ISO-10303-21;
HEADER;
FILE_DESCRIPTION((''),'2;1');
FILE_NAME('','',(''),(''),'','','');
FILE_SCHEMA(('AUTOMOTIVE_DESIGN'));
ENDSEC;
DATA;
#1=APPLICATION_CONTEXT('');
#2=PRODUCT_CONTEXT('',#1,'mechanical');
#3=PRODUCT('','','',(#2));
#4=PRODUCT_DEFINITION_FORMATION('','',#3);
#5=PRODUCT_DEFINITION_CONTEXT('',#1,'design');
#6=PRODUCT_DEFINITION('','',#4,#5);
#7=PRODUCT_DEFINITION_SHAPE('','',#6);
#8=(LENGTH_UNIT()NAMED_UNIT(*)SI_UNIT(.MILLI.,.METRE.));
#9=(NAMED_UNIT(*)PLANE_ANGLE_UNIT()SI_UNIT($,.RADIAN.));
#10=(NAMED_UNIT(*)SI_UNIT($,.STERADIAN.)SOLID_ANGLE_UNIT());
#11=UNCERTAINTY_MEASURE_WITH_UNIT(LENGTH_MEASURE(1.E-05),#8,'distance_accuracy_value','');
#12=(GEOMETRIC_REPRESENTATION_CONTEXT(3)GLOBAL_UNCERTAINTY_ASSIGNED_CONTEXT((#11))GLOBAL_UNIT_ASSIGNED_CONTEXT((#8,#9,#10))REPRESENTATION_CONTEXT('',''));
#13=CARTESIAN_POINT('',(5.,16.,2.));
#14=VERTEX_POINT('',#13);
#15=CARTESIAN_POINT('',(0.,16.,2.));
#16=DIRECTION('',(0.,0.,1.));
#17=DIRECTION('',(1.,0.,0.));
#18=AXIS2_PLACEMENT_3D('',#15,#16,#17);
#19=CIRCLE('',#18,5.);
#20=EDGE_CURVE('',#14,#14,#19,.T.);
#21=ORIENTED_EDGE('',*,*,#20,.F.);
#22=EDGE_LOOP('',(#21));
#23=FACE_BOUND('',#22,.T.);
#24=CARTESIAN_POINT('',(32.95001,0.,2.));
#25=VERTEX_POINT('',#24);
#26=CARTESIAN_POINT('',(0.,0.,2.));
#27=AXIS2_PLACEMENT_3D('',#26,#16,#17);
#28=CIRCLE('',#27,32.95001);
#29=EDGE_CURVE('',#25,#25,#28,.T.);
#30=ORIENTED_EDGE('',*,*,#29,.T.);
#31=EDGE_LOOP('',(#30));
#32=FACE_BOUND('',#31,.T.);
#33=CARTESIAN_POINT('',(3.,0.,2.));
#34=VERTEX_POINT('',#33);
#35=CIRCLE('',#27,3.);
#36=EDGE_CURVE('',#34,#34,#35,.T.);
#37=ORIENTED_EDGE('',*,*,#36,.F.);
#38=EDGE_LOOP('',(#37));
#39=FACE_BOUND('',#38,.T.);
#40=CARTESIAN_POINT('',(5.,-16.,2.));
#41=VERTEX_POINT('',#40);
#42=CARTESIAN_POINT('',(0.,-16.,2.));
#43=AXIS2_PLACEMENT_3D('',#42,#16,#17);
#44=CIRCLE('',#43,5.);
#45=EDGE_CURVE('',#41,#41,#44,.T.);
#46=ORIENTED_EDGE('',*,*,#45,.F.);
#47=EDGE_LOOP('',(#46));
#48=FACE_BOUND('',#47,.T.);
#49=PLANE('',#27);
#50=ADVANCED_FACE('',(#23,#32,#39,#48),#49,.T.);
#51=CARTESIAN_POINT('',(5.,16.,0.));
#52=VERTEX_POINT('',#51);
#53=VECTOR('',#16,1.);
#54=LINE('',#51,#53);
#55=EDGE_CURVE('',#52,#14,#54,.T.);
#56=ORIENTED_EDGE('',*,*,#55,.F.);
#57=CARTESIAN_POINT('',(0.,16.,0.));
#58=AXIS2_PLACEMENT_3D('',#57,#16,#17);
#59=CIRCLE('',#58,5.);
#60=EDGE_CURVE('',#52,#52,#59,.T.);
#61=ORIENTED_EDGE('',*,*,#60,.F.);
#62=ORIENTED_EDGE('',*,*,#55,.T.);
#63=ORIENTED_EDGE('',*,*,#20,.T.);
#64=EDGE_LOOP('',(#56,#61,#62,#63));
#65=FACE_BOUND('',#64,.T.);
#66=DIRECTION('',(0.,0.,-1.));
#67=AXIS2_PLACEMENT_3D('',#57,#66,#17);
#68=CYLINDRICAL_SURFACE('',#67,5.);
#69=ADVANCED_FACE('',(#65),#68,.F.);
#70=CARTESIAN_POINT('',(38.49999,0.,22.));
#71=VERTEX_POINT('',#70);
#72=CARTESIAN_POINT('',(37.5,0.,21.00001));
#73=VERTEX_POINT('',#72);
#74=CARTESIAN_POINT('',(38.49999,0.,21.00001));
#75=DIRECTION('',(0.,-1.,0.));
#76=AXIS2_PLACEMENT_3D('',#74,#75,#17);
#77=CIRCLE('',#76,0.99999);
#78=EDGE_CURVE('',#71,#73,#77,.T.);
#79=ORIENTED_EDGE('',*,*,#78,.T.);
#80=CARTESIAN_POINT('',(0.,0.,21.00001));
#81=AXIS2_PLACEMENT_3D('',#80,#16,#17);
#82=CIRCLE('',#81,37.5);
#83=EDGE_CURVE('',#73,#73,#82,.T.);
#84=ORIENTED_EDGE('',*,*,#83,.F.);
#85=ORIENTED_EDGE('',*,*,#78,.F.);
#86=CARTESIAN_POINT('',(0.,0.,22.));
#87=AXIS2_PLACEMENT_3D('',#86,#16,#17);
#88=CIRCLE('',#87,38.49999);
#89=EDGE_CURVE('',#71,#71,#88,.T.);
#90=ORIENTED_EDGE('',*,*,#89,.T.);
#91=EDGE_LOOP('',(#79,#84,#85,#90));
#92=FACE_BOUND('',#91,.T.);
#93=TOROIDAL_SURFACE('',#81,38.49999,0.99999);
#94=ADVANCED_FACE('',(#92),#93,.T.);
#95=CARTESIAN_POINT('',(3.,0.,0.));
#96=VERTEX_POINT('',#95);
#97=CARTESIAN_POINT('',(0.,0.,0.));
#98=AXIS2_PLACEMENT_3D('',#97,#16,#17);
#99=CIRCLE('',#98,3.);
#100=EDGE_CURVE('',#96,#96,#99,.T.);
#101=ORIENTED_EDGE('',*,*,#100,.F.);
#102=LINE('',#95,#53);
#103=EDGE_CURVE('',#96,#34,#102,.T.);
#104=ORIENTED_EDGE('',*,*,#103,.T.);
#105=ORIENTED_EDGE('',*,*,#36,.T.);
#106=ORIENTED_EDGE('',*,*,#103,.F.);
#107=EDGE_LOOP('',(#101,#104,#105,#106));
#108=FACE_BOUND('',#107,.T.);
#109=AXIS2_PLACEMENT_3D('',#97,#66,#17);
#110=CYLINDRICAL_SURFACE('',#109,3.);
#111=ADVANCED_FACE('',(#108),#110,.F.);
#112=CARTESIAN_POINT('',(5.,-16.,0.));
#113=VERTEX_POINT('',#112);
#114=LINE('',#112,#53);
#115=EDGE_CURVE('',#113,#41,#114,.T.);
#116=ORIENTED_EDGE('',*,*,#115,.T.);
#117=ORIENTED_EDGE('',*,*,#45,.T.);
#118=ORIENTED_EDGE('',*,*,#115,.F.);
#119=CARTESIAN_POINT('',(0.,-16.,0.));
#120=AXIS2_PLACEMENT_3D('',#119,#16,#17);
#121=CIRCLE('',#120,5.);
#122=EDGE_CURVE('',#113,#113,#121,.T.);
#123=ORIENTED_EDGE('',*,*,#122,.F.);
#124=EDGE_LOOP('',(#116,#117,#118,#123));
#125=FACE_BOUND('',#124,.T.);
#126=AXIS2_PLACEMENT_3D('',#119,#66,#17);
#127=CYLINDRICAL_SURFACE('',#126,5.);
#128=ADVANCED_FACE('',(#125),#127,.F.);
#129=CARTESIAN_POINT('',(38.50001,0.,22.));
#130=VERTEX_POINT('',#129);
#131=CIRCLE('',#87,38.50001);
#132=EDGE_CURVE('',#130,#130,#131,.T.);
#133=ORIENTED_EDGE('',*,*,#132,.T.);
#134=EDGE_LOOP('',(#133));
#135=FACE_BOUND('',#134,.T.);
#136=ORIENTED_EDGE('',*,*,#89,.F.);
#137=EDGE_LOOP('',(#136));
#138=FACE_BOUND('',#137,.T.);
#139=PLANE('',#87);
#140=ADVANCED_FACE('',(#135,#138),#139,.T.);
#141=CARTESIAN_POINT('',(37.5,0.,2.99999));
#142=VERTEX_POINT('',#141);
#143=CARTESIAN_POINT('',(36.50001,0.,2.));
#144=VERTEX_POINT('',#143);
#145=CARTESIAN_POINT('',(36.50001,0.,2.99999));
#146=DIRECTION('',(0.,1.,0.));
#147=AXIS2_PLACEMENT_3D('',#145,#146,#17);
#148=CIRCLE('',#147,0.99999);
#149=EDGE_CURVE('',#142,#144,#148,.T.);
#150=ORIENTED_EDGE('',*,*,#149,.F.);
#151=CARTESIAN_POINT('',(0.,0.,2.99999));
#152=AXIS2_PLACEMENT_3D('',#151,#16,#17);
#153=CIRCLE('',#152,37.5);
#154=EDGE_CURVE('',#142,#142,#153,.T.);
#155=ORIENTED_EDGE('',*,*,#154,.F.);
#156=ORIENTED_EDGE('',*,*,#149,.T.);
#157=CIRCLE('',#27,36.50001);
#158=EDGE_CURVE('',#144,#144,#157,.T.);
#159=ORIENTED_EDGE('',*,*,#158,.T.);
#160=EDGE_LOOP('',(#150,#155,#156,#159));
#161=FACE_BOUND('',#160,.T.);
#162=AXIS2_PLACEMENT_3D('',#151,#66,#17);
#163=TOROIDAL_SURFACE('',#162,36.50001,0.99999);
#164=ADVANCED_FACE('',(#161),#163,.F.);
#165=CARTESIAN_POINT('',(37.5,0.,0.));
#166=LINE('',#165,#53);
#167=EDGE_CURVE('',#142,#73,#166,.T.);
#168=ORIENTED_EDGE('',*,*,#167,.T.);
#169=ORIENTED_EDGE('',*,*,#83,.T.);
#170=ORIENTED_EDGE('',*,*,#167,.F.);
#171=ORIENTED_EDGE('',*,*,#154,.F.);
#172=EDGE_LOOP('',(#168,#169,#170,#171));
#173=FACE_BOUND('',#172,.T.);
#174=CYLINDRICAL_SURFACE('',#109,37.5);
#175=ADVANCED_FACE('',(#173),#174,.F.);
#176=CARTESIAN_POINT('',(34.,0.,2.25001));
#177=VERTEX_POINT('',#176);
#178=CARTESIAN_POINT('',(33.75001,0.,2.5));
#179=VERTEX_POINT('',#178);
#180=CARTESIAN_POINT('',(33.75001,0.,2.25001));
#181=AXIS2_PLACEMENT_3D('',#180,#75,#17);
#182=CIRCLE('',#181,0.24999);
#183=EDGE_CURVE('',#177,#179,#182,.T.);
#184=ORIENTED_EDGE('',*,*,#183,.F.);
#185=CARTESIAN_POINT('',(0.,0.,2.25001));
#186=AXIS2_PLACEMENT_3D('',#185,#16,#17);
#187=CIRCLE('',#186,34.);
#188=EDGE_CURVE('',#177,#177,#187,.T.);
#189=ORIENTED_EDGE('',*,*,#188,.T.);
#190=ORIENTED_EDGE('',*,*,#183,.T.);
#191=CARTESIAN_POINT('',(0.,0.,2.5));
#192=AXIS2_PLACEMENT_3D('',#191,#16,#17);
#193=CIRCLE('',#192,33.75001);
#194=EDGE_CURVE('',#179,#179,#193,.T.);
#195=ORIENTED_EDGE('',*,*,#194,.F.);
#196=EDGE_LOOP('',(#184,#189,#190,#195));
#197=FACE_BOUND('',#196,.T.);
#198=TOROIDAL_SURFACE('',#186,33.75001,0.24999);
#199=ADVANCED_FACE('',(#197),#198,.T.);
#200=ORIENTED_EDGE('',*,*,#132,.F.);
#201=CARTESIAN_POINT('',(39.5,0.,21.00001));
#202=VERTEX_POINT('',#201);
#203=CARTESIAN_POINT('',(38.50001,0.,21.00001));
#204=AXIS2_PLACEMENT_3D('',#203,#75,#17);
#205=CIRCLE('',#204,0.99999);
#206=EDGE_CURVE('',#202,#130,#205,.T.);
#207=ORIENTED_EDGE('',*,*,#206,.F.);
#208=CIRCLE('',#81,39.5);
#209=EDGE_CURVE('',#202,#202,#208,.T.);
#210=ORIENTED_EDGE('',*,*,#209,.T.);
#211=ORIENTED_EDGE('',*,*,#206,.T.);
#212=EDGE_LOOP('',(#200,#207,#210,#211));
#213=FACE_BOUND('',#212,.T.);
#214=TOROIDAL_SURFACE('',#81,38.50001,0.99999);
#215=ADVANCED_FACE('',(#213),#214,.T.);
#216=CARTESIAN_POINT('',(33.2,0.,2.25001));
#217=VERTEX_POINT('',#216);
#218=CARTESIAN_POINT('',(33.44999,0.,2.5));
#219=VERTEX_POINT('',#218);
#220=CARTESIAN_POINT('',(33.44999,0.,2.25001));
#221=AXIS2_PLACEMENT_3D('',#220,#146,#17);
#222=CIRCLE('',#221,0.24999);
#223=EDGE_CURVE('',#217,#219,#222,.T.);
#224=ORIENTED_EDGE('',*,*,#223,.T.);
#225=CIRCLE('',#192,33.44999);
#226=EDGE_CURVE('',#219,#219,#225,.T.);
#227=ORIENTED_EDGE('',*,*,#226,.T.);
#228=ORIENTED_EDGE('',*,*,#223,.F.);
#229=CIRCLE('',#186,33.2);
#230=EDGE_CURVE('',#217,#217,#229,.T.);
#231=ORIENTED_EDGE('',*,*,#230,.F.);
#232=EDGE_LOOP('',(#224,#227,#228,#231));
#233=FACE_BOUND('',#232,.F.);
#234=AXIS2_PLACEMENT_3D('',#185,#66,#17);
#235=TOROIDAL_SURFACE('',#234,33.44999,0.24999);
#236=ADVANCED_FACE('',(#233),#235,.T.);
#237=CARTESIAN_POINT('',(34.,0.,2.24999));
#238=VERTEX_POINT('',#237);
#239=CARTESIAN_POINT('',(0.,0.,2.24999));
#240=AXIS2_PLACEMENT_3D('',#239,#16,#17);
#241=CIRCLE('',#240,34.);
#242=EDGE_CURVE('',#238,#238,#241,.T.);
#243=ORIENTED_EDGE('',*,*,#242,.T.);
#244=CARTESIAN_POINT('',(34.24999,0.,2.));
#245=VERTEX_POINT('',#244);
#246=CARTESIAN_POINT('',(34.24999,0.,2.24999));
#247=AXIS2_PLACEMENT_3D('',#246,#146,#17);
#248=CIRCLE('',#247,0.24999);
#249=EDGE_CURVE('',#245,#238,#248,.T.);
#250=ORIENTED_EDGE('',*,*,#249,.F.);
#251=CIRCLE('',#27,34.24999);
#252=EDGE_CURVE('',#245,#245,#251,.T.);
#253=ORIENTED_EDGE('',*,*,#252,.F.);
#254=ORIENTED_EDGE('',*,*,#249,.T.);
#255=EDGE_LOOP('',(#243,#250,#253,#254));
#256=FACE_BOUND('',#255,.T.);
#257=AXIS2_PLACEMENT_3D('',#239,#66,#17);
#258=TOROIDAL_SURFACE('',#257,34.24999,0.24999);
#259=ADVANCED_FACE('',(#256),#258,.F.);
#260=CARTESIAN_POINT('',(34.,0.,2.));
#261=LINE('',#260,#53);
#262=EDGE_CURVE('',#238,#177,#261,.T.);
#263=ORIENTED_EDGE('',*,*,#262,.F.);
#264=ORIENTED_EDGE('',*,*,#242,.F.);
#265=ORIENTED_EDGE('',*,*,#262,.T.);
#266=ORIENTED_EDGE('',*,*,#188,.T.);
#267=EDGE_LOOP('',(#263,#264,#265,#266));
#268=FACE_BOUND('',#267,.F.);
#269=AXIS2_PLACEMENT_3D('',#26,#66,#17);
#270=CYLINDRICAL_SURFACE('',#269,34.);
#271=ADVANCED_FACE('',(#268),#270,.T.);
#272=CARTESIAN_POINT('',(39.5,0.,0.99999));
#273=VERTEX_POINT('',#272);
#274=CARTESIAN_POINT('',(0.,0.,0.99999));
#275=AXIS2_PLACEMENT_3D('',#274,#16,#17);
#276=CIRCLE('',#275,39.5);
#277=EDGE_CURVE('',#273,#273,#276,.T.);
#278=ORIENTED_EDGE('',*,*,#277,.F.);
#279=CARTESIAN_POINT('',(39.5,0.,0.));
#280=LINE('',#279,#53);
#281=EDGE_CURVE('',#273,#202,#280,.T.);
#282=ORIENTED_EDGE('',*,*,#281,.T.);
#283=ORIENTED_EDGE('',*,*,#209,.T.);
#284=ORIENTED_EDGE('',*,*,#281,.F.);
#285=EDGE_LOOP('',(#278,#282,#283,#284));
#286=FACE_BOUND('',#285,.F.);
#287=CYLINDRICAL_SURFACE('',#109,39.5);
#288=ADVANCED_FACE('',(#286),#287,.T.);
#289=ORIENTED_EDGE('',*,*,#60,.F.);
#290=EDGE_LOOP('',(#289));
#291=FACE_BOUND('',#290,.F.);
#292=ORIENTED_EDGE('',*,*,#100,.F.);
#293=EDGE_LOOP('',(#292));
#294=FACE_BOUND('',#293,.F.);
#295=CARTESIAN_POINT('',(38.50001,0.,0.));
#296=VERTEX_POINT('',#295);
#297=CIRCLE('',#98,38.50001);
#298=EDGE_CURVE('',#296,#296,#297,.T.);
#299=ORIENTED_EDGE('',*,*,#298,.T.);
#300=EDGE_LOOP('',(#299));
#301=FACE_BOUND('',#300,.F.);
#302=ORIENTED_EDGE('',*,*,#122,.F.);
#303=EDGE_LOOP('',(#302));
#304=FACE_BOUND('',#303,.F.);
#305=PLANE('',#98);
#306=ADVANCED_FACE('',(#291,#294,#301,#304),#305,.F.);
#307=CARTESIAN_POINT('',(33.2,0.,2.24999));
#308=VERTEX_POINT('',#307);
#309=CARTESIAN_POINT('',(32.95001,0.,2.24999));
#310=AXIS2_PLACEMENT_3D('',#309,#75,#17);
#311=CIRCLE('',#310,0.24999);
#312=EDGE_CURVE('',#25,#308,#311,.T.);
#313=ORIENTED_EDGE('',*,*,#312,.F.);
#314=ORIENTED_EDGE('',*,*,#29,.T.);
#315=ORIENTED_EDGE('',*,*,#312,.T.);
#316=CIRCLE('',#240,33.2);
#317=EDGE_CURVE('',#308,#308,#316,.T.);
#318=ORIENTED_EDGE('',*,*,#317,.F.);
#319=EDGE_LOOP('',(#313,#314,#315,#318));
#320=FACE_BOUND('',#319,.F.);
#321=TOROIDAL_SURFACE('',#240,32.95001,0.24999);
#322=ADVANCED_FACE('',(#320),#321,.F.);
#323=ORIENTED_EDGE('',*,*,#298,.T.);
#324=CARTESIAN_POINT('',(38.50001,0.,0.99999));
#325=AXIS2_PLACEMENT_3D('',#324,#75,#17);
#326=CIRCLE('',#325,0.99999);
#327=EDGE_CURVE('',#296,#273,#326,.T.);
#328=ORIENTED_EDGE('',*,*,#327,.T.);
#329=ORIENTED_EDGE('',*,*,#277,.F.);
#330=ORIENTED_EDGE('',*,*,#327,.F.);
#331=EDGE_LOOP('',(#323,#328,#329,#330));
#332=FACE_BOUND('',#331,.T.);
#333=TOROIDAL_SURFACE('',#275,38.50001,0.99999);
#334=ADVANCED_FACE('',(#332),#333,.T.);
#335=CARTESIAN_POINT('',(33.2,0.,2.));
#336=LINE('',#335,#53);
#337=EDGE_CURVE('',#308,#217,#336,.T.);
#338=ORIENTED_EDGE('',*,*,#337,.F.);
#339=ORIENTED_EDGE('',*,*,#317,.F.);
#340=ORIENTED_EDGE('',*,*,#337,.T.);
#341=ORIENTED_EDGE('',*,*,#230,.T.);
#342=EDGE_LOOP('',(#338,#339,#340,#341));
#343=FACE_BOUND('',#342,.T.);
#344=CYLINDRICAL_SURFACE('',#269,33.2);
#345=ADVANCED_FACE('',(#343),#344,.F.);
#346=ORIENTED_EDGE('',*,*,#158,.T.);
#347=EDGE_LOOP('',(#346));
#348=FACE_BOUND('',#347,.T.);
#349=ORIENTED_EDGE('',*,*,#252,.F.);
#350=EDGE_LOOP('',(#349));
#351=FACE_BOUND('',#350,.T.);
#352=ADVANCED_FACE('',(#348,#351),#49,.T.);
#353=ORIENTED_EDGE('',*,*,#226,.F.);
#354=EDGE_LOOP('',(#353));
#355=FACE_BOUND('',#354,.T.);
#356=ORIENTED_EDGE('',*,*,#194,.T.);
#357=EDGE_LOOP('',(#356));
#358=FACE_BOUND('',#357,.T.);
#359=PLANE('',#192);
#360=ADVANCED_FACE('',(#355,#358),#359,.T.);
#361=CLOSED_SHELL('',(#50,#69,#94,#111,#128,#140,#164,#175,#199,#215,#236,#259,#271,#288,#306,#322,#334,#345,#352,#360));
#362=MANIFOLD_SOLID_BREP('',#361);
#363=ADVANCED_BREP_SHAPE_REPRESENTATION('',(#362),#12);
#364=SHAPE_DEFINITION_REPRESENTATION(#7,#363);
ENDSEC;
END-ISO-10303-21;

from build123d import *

# Parameters (mm, degrees)
F0_R     = 37.5
F0_R_2   = 5
F0_R_3   = 3
F1_DEPTH = 2
F0_R_4   = 39.5
F2_DEPTH = 22
F3_R     = 34
F3_R_2   = 33.2
F4_DEPTH = 0.5
F5_R     = 0.24999
F6_R     = 0.99999


# Not quite as in the source:
# - a fillet or chamfer is up to 0.001 mm smaller than in the source, because OpenCascade refuses the exact size


with BuildPart() as f1:
    # F0 (on Top) → F1 (new body)
    with BuildSketch(Plane.XY):
        Circle(F0_R)
        with Locations((0, -16)):
            Circle(F0_R_2, mode=Mode.SUBTRACT)
        Circle(F0_R_3, mode=Mode.SUBTRACT)
        with Locations((0, 16)):
            Circle(F0_R_2, mode=Mode.SUBTRACT)
    extrude(amount=F1_DEPTH)

    # F0 (on Top) → F2 (join)
    with BuildSketch(Plane.XY):
        Circle(F0_R_4)
        Circle(F0_R, mode=Mode.SUBTRACT)
    extrude(amount=F2_DEPTH)

    # F3 (on face) → F4 (join)
    with BuildSketch(Plane.XY.offset(2)):
        Circle(F3_R)
        Circle(F3_R_2, mode=Mode.SUBTRACT)
    extrude(amount=F4_DEPTH)

    # F5 (radius 0.25 in the source; OpenCascade refuses exactly that, so slightly less here)
    f5_edges = [f1.edges().sort_by_distance(p)[0] for p in [
        (-34, 0, 2.5),
        (-33.2, 0, 2.5),
        (-33.2, 0, 2),
        (-34, 0, 2),
    ]]
    fillet(f5_edges, radius=F5_R)

    # F6 (radius 1 in the source; OpenCascade refuses exactly that, so slightly less here)
    f6_edges = [f1.edges().sort_by_distance(p)[0] for p in [
        (-37.5, 0, 2),
        (-39.5, 0, 0),
        (-39.5, 0, 22),
        (-37.5, 0, 22),
    ]]
    fillet(f6_edges, radius=F6_R)


solid = f1.part
